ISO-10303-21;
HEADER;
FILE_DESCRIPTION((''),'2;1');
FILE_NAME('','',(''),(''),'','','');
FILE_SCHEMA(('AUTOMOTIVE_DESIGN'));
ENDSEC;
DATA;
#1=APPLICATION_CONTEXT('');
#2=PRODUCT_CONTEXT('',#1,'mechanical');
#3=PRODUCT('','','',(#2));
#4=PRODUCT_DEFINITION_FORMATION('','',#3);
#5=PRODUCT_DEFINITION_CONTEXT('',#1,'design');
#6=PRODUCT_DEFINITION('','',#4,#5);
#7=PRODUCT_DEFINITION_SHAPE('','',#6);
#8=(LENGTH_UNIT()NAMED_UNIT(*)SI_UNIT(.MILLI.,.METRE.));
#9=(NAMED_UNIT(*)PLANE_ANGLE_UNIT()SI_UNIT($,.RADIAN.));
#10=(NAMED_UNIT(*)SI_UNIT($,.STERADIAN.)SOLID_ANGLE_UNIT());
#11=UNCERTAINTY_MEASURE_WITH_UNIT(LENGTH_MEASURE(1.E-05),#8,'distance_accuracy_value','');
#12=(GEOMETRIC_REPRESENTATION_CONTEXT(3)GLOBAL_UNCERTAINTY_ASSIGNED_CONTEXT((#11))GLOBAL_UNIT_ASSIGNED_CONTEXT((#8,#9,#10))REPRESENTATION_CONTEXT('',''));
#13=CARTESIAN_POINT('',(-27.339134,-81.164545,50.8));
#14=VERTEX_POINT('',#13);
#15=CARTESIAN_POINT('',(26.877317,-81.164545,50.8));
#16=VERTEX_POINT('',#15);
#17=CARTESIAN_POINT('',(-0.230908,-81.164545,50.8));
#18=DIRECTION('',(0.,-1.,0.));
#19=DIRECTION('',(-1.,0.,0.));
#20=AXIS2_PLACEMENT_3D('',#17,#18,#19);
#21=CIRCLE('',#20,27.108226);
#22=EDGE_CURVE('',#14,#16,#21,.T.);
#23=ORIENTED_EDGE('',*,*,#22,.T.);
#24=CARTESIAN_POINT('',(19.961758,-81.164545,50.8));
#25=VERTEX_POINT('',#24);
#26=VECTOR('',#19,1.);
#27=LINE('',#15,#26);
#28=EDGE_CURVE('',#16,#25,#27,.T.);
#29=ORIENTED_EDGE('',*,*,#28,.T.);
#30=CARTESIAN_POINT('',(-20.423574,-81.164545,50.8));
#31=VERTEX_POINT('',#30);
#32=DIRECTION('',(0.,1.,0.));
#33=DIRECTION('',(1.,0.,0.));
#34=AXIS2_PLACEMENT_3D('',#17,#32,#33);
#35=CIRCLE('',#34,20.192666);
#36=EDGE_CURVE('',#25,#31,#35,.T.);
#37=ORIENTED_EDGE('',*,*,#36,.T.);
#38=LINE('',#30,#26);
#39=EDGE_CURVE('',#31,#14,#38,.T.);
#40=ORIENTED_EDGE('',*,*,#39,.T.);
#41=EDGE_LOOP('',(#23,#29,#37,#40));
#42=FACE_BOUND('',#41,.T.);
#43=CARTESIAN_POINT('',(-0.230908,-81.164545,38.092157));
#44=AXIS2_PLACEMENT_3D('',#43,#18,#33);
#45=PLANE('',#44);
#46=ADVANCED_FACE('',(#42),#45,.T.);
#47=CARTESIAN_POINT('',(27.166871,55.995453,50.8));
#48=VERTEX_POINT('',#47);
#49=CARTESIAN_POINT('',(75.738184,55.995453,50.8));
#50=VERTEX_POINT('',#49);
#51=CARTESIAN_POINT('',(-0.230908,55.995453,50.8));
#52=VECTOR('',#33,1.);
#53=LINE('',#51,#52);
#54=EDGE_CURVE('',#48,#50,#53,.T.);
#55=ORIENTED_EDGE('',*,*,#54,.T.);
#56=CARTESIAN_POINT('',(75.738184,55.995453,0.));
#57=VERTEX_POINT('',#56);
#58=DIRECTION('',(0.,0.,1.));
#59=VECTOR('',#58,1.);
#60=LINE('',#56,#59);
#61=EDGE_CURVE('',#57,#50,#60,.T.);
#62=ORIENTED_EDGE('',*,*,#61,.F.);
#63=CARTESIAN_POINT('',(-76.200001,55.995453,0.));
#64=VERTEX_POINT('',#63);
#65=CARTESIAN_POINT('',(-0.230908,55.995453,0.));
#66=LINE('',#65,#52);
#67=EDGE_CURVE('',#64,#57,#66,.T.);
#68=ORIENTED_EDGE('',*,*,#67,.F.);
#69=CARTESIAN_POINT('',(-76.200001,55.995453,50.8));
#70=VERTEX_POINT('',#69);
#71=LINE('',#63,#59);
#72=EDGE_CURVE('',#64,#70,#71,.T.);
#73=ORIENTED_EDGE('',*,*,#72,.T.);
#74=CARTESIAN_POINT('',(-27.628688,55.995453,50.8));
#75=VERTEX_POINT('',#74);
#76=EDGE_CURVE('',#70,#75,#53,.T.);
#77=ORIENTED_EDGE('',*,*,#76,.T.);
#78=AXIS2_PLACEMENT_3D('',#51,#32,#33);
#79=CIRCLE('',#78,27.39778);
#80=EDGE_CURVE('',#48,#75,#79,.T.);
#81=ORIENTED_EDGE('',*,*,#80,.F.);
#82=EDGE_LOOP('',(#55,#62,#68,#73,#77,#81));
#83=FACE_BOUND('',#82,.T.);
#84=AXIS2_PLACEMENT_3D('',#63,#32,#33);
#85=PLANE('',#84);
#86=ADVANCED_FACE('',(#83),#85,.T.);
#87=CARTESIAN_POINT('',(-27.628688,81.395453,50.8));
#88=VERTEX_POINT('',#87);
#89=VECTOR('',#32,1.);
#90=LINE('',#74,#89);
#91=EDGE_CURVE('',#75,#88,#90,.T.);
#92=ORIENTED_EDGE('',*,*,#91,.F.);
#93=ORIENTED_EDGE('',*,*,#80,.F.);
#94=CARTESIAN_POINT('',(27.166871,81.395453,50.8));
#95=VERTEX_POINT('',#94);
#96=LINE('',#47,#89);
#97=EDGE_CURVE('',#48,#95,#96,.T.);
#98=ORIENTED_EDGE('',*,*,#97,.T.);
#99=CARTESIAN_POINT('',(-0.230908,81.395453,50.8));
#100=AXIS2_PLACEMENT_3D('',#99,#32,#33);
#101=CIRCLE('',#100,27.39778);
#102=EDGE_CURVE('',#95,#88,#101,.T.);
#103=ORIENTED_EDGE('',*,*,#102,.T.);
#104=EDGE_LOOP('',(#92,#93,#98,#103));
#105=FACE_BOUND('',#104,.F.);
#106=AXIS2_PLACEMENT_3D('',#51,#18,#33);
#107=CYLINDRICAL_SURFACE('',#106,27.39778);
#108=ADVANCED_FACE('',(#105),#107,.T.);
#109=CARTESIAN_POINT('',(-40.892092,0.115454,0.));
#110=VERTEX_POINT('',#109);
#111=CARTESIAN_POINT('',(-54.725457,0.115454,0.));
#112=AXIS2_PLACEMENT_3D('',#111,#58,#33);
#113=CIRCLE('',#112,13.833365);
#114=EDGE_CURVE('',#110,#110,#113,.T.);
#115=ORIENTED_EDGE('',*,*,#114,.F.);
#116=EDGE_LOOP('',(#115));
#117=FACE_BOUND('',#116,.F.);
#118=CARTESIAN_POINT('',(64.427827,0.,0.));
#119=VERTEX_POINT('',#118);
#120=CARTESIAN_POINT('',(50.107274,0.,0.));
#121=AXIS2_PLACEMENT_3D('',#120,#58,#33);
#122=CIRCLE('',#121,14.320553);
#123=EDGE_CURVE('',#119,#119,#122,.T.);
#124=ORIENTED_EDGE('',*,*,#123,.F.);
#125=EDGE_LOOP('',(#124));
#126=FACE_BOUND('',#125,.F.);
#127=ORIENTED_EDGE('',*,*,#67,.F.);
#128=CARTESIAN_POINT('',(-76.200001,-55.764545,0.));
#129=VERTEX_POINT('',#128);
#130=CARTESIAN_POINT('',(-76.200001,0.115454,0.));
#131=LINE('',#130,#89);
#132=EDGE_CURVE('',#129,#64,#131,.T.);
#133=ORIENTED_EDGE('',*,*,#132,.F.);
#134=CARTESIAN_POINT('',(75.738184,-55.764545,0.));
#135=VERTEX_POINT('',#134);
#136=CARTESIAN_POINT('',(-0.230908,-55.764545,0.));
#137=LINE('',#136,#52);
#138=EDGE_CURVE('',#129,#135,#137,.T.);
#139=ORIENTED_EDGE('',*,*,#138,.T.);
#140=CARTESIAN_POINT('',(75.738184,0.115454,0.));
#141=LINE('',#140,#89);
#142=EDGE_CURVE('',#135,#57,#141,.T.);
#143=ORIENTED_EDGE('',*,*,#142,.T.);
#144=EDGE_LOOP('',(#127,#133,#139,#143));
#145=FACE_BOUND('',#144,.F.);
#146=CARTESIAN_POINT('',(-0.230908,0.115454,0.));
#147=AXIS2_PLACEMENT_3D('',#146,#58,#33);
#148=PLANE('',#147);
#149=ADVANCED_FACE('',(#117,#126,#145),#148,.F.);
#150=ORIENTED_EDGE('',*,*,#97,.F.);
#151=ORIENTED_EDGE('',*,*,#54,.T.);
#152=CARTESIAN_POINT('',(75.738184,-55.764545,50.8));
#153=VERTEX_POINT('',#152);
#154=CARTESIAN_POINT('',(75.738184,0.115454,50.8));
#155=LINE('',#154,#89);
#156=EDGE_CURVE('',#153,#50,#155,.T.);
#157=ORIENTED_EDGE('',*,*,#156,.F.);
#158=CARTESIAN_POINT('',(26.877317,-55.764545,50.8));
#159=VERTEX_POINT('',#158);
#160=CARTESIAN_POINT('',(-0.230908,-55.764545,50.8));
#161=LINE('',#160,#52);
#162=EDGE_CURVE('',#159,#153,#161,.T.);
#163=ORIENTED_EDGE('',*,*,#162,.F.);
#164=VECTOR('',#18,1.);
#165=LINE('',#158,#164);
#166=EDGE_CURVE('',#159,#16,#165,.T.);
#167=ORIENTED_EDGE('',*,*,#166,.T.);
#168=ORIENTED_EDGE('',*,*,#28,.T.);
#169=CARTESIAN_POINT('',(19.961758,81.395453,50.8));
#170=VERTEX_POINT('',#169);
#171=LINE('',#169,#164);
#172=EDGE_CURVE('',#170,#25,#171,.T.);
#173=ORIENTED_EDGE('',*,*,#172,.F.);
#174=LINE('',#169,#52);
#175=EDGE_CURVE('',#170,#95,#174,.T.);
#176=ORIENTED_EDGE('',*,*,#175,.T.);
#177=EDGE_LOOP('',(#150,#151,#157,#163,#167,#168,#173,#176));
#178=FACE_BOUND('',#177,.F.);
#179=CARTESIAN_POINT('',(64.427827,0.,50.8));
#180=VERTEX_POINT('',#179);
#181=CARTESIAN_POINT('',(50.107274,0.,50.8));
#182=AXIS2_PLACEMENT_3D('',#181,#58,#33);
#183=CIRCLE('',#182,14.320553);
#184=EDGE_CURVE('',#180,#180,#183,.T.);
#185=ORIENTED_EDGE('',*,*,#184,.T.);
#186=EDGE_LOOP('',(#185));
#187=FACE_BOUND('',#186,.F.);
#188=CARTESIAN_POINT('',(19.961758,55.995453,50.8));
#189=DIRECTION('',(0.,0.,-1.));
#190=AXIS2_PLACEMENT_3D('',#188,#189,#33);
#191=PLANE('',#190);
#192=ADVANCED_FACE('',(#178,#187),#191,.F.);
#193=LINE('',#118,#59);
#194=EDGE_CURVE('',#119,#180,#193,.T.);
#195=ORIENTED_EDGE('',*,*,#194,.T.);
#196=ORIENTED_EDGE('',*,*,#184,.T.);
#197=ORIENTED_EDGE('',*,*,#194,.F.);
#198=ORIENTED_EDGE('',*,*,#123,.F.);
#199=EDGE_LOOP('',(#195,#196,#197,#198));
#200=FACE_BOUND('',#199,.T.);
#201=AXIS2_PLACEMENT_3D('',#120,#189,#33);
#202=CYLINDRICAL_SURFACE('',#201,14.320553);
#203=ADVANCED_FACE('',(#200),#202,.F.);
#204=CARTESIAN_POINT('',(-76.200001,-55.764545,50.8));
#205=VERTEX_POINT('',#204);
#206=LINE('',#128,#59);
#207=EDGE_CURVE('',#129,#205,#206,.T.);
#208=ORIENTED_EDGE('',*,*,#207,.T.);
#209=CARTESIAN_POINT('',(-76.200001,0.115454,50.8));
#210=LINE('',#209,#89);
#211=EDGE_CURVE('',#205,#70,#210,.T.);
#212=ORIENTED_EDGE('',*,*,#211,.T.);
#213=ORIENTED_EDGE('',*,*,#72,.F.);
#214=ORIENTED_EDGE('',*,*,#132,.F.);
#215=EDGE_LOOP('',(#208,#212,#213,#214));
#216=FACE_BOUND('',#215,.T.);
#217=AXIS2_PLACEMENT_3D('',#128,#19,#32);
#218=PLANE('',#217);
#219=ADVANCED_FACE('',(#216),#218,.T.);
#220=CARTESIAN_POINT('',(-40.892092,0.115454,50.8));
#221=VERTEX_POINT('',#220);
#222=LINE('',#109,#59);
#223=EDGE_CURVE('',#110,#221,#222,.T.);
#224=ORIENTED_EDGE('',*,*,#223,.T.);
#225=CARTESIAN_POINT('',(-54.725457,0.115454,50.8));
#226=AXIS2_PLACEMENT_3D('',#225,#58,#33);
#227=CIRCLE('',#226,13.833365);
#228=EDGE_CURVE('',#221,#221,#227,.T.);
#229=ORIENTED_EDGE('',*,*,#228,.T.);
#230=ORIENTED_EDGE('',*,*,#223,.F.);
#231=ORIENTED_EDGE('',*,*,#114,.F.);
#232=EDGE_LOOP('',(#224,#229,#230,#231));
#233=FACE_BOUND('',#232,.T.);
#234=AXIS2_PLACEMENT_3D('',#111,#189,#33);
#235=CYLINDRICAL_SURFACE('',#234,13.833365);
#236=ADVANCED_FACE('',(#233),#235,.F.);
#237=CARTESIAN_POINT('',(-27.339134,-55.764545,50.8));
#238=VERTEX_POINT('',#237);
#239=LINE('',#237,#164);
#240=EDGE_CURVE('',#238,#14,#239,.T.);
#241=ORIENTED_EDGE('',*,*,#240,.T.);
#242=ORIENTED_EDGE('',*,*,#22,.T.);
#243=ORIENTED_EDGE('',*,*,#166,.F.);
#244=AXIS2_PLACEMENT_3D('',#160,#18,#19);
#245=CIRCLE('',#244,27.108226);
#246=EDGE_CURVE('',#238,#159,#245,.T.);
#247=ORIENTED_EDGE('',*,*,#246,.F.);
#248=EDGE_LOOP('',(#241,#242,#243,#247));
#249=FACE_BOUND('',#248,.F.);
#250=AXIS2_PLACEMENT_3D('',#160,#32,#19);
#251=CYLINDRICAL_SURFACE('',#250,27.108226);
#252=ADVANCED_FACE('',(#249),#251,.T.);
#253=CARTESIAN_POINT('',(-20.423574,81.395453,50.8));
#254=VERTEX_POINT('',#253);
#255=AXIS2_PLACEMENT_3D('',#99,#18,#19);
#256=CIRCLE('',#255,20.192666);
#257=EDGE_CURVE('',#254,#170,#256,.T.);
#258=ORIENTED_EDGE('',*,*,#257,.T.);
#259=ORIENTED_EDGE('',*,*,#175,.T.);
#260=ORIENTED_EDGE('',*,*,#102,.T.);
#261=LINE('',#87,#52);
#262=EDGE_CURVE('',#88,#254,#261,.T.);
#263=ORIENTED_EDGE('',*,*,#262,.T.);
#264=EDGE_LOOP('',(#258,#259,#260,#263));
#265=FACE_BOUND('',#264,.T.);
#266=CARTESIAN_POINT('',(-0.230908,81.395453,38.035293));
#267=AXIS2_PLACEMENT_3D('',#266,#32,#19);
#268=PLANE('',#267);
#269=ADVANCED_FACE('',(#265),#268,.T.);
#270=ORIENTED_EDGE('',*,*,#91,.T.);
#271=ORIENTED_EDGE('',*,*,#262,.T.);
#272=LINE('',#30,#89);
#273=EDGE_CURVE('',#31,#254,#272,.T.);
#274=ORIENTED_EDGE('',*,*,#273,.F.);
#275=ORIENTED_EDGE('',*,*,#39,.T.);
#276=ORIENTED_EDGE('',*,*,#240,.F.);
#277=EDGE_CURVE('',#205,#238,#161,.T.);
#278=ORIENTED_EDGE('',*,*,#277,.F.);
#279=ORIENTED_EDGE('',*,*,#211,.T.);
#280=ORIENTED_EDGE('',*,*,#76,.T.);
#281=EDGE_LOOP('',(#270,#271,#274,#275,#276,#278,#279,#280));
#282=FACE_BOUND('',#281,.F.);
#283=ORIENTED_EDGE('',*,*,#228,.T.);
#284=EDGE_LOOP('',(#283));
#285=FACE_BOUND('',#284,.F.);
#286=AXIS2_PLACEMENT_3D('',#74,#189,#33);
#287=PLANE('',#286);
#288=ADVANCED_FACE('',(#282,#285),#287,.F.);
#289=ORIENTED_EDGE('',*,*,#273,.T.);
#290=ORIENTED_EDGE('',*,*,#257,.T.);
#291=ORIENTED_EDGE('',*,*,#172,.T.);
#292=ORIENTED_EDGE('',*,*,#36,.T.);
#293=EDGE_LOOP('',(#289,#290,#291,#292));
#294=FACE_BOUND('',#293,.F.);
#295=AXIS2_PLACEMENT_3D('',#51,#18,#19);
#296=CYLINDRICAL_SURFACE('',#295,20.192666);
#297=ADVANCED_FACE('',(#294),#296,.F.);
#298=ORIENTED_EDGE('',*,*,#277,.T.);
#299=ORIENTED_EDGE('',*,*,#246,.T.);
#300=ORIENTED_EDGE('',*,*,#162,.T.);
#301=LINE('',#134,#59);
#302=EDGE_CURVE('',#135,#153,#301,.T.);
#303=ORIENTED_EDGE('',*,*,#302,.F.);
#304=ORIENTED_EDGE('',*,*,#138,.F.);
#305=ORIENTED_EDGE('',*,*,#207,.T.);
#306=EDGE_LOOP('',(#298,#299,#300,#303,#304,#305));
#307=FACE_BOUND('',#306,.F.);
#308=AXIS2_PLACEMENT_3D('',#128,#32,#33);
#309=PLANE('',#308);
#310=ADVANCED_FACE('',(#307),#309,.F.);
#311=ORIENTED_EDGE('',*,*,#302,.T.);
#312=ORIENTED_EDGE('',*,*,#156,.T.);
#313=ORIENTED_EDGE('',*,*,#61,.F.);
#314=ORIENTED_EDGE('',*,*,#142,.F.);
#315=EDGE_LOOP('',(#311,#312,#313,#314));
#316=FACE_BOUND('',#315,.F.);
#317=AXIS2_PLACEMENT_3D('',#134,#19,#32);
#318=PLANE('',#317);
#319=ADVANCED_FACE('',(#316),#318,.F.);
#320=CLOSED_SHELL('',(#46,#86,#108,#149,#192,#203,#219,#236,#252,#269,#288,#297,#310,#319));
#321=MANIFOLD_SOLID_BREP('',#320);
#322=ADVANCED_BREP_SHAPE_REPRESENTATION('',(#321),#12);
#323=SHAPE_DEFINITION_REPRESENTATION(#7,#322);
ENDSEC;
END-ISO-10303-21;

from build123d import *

# Parameters (mm, degrees)
F0_W     = 151.9381850958
F0_H     = 111.7599979043
F0_R     = 13.8333647365
F0_R_2   = 14.3205526474
F1_DEPTH = 50.8
F3_DEPTH = 25.4
F4_DEPTH = 127
F6_DEPTH = 25.4


with BuildPart() as f1:
    # F0 (on Top) → F1 (new body)
    with BuildSketch(Plane.XY):
        with Locations((-0.2309083939, 0.1154541969)):
            Rectangle(F0_W, F0_H)
        with Locations((-54.7254569829, 0.1154541969)):
            Circle(F0_R, mode=Mode.SUBTRACT)
        with Locations((50.1072742045, 0)):
            Circle(F0_R_2, mode=Mode.SUBTRACT)
    extrude(amount=F1_DEPTH)

    # F2 (on face) → F3 (join)
    with BuildSketch(Plane.XZ.offset(55.7645447552)):
        with BuildLine():
            ThreePointArc((-27.3391341012, 50.8), (-0.2309083939, 23.6917742927), (26.8773173135, 50.8))
            Line((26.8773173135, 50.8), (19.9617576881, 50.8))
            ThreePointArc((19.9617576881, 50.8), (-0.2309083939, 30.6073339181), (-20.4235744758, 50.8))
            Line((-20.4235744758, 50.8), (-27.3391341012, 50.8))
        make_face()
    extrude(amount=F3_DEPTH)

    # F4 (cut): a face of the model
    f4_faces = [f1.faces().sort_by_distance(p)[0] for p in [
        (-0.2309083939, -55.7645447552, 42.2299663436),
    ]]
    extrude(f4_faces, amount=-F4_DEPTH, mode=Mode.SUBTRACT)

    # F5 (on face) → F6 (join)
    with BuildSketch(Plane(origin=(0, 55.9954531491, 0), x_dir=(-1, 0, 0), z_dir=(0, 1, 0))):
        with BuildLine():
            ThreePointArc((-27.1668712907, 50.8), (0.2309083939, 23.4022203155), (27.6286880784, 50.8))
            Line((27.6286880784, 50.8), (20.4235744758, 50.8))
            ThreePointArc((20.4235744758, 50.8), (0.2309083939, 30.6073339181), (-19.9617576881, 50.8))
            Line((-19.9617576881, 50.8), (-27.1668712907, 50.8))
        make_face()
    extrude(amount=F6_DEPTH)


solid = f1.part
